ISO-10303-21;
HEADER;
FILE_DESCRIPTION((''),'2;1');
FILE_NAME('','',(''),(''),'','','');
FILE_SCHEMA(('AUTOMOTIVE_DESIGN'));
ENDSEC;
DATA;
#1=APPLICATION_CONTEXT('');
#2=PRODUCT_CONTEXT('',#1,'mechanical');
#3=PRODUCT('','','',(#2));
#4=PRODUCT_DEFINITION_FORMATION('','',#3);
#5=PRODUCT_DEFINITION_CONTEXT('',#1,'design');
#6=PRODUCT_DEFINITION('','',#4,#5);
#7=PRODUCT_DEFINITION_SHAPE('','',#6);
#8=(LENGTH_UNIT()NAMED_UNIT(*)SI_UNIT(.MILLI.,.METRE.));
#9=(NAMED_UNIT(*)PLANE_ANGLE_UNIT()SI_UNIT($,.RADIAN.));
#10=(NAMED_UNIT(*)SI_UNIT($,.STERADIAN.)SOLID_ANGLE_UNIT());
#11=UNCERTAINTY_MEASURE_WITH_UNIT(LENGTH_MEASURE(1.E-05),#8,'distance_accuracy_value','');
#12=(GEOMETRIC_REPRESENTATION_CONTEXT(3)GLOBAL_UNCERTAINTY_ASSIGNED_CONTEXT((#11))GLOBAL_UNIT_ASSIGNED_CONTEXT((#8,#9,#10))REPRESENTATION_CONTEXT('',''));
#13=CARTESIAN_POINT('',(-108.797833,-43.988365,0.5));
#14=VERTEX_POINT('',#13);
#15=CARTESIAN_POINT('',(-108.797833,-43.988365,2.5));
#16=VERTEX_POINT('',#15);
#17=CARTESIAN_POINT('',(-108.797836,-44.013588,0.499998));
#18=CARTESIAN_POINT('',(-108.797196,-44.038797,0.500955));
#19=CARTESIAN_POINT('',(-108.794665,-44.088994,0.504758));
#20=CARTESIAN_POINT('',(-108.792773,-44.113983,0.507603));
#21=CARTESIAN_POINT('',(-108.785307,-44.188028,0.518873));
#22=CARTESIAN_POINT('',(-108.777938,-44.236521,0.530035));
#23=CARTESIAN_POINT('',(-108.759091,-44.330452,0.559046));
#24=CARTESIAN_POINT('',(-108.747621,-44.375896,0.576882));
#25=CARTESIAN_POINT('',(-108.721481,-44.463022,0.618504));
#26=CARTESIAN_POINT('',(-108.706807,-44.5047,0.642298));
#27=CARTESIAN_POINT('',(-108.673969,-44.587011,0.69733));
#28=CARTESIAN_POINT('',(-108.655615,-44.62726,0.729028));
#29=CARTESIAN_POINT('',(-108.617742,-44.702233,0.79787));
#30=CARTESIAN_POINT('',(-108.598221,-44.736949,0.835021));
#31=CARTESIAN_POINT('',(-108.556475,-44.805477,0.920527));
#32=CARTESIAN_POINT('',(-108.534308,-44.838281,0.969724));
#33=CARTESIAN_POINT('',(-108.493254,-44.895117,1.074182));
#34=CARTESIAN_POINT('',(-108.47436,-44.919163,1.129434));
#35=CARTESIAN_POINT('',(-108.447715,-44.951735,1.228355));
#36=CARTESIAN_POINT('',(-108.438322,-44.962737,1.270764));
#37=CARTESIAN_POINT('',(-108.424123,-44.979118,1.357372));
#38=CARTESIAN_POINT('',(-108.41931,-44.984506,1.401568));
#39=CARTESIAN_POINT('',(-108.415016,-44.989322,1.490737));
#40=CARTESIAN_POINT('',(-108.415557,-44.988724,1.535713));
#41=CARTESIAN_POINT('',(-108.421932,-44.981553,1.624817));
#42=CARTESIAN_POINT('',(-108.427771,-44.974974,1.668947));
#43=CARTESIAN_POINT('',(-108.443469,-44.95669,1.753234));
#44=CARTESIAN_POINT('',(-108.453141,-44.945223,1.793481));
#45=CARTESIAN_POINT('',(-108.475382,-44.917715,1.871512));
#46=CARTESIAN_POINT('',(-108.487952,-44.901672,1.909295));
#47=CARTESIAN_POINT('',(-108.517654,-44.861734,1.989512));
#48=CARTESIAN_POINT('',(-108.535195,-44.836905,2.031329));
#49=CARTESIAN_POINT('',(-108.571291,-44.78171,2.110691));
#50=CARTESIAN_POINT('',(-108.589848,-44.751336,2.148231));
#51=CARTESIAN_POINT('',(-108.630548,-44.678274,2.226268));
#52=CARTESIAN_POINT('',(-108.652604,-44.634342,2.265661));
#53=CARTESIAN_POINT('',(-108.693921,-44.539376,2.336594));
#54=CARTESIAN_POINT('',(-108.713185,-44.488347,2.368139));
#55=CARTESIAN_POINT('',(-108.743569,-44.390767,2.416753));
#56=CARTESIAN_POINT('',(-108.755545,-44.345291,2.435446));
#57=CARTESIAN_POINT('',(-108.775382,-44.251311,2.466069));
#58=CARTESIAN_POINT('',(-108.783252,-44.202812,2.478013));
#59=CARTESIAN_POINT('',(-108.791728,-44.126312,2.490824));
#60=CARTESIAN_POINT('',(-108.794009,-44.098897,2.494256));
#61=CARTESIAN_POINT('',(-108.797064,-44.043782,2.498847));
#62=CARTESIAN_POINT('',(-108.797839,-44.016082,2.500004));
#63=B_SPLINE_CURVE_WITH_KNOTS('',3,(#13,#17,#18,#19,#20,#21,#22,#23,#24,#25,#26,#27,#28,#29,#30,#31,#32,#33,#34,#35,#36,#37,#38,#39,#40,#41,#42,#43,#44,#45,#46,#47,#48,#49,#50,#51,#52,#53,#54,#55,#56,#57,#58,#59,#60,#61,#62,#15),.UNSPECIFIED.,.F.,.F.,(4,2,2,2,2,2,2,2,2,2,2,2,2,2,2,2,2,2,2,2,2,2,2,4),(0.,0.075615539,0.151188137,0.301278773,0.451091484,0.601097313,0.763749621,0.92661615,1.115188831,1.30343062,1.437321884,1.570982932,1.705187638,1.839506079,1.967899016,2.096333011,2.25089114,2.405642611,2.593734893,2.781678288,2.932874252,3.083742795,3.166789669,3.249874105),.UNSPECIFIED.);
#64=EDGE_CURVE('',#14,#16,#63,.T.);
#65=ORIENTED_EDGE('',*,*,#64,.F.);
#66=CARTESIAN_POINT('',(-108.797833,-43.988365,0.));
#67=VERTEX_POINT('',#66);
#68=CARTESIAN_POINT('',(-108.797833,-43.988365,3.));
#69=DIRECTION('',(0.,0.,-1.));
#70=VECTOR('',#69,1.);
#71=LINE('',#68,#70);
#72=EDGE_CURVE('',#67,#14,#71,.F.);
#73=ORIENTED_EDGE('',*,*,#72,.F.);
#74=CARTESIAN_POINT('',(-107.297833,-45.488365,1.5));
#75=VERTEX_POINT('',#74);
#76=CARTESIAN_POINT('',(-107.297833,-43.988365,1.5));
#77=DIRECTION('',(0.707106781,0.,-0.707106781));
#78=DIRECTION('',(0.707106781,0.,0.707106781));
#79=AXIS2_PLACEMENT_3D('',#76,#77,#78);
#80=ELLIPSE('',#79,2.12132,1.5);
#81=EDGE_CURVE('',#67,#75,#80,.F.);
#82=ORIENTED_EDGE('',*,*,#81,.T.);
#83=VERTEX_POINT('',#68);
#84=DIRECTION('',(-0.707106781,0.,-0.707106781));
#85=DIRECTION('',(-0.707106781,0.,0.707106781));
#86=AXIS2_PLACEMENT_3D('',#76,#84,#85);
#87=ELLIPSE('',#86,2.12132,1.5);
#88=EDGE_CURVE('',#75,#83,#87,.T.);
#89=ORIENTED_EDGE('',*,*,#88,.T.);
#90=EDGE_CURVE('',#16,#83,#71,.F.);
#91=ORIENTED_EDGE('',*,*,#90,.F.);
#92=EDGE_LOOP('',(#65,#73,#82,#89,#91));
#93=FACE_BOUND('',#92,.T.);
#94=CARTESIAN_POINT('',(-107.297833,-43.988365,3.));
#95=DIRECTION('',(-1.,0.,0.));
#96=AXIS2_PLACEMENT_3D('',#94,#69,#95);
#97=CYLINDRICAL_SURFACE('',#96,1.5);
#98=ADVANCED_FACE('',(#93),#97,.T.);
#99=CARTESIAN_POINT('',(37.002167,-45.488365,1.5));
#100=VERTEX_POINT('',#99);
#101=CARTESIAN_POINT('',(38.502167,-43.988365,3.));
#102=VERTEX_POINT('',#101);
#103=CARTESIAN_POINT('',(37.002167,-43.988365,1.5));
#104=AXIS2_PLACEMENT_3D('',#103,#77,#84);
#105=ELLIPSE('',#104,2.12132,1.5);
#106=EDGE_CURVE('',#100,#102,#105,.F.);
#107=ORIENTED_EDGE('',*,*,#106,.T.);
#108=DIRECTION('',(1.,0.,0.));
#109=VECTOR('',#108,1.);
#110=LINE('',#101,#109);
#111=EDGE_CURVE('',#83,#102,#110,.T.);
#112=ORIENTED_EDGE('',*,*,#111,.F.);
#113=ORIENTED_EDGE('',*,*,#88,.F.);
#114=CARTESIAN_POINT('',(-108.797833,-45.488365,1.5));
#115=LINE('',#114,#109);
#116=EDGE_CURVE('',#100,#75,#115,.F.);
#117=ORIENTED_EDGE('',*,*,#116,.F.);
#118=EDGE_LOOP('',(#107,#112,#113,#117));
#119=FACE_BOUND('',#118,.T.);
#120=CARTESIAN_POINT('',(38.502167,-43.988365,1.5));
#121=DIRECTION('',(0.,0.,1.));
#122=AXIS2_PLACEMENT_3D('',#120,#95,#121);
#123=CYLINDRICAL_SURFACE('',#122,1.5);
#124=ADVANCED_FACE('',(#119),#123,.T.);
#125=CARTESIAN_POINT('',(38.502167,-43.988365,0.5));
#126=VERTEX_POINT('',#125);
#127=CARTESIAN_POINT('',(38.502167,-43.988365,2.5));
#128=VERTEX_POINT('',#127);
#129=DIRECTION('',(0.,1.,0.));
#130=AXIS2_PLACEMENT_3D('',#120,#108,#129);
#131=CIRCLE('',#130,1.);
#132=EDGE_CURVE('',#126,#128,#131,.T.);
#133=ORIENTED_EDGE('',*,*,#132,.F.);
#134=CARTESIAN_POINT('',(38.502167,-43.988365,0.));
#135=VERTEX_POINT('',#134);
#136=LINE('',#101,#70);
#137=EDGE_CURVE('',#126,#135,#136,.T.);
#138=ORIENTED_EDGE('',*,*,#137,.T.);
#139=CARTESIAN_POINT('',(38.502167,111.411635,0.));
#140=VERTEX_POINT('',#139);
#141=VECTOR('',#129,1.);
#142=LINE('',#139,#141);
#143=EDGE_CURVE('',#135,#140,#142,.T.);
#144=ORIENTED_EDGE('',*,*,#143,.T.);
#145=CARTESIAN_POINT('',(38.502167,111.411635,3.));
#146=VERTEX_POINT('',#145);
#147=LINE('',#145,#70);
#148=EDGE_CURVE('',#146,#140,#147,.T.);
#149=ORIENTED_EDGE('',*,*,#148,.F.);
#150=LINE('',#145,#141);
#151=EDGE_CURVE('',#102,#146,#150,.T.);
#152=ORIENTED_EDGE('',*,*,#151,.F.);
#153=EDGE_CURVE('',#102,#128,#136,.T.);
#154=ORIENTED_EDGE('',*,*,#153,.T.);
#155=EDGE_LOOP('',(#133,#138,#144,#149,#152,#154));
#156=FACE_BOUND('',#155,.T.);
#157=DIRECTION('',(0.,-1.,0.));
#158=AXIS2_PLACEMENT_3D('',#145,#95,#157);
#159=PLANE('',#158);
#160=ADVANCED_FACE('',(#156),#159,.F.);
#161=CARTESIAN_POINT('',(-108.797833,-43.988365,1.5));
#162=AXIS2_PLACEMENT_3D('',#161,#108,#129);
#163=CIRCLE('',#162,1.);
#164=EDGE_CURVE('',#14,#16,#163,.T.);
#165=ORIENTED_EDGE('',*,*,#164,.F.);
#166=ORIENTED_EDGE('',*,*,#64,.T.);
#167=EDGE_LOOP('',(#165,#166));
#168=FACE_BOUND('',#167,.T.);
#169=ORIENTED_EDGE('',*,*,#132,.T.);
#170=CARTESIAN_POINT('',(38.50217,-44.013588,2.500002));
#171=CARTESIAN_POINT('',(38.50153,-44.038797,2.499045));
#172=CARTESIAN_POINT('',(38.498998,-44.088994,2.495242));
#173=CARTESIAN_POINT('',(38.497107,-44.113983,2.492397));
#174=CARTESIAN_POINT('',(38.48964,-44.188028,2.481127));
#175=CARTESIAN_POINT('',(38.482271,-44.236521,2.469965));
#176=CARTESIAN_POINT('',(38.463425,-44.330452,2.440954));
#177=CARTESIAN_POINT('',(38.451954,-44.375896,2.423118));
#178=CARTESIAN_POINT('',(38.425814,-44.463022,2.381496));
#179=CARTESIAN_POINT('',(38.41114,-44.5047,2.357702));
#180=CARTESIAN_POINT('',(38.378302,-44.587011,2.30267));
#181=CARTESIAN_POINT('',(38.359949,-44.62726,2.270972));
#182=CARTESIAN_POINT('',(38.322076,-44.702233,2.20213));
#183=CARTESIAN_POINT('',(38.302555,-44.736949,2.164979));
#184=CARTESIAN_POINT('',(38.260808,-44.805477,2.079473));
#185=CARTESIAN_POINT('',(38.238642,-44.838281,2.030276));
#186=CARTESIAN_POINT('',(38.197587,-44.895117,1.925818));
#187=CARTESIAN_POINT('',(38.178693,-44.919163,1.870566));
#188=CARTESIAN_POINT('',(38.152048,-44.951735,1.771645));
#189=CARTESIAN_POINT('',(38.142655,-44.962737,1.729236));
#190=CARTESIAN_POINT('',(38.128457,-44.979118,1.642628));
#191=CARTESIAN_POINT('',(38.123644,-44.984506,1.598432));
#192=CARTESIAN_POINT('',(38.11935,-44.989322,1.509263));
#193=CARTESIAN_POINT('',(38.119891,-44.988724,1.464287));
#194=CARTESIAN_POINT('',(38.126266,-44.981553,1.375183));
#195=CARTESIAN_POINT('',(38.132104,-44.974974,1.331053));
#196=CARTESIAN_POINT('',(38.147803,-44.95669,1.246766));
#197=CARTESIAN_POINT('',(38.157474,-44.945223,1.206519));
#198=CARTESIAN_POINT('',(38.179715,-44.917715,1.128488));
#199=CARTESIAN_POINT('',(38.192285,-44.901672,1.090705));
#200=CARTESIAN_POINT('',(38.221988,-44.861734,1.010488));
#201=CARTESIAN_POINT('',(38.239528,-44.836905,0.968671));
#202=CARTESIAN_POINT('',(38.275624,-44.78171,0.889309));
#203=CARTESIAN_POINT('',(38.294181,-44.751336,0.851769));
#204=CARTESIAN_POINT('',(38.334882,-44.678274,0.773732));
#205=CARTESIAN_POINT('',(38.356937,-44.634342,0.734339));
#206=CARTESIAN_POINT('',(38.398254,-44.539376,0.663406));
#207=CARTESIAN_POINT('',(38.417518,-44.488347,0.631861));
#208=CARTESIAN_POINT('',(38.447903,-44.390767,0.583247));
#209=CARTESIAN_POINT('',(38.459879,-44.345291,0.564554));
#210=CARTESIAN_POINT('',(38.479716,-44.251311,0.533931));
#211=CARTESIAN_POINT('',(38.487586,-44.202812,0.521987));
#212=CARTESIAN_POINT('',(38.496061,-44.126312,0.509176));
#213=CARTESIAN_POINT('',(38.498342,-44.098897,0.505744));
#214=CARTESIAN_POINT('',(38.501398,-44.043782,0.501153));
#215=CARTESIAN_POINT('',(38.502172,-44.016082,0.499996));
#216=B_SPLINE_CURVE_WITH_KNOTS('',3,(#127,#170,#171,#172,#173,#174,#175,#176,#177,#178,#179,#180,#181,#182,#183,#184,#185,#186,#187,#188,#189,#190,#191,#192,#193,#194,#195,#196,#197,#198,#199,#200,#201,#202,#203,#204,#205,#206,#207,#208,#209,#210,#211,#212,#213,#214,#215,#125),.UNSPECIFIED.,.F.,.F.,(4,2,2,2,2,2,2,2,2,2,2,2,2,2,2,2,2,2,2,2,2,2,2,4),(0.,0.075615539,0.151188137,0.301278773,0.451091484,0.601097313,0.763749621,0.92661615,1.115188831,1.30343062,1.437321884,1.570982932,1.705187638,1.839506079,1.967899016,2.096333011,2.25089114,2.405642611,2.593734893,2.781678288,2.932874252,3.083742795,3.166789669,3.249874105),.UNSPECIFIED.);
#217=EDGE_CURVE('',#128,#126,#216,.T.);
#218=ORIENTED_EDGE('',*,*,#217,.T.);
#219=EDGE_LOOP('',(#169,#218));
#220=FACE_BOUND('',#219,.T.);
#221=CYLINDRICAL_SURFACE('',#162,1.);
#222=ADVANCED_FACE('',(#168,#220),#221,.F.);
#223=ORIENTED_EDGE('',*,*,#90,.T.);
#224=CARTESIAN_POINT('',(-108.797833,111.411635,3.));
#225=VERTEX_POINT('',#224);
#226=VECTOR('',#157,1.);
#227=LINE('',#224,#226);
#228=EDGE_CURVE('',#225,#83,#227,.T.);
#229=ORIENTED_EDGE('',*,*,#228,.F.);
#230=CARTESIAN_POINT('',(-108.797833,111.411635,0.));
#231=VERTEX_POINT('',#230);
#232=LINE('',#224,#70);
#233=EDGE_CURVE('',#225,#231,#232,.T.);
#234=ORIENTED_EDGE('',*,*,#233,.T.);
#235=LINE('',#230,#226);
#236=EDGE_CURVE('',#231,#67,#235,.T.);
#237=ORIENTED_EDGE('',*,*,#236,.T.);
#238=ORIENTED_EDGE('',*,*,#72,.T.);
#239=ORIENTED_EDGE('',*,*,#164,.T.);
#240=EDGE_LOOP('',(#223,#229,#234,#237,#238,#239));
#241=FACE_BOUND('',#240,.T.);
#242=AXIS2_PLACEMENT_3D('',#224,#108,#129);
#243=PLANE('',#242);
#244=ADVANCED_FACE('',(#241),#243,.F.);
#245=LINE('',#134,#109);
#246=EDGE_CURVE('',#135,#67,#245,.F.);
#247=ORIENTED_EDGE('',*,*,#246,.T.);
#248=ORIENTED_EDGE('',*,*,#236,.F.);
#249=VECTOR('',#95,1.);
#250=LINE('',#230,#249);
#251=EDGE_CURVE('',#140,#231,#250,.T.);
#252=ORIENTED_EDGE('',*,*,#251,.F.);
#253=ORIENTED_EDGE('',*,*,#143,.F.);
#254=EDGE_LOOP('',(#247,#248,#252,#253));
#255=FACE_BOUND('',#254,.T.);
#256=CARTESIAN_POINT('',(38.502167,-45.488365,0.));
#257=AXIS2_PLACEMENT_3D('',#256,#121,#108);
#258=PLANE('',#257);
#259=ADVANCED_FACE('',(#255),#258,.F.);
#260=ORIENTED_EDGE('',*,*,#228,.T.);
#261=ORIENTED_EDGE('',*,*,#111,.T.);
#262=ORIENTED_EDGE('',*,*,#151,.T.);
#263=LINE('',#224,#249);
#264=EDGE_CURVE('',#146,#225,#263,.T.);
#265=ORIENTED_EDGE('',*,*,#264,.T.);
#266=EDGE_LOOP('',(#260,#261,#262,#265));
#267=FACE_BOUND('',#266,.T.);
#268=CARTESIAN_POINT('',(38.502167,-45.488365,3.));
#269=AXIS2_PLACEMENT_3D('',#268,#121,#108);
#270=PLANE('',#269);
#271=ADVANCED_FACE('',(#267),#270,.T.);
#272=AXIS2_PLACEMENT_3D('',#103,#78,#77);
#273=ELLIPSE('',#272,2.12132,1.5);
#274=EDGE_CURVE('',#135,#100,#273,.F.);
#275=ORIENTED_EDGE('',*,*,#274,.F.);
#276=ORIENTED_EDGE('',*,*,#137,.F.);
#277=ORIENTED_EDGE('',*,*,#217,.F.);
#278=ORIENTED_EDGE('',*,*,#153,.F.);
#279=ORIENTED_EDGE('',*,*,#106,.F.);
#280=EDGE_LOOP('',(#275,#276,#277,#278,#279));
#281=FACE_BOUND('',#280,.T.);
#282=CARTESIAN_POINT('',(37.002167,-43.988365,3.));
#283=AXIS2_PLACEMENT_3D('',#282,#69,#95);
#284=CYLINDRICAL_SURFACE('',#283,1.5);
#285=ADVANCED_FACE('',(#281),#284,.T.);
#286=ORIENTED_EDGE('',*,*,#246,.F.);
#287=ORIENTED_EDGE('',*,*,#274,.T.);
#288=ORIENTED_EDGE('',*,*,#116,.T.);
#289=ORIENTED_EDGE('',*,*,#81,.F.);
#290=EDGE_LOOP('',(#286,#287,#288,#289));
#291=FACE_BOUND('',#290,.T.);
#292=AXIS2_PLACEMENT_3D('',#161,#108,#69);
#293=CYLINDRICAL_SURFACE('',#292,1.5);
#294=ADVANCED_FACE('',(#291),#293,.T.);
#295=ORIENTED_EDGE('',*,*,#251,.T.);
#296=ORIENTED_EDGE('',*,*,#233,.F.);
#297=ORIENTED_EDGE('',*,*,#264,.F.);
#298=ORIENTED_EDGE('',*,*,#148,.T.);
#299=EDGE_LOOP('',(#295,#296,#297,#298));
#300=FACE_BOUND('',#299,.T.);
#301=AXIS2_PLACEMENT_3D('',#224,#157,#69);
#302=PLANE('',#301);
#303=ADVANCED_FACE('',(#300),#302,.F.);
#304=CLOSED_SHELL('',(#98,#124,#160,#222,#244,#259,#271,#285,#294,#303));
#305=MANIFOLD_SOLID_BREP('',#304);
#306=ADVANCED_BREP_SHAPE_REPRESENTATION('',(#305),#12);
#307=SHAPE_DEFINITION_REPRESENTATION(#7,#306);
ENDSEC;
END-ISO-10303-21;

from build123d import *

# Parameters (mm, degrees)
SKETCH_1_W          = 147.3
SKETCH_1_H          = 156.9
EXTRUDE_1_DEPTH     = 3
SKETCH_2_R          = 1
CUT_EXTRUDE_1_DEPTH = 185.712864908
FILLET_1_R          = 1.5


with BuildPart() as part:
    # 草图1 → 凸台-拉伸1 (new body)
    with BuildSketch(Plane.XY):
        with Locations((-35.147833333, 32.96163522)):
            Rectangle(SKETCH_1_W, SKETCH_1_H)
    extrude(amount=EXTRUDE_1_DEPTH)

    # 草图2 → 切除-拉伸1 (cut, through all)
    with BuildSketch(Plane(origin=(38.502166667, 0, 0), x_dir=(0, 0, -1), z_dir=(1, 0, 0))):
        with Locations(Location((-1.5, -43.98836478, 0), (0, 0, 90))):
            Circle(SKETCH_2_R)
    extrude(amount=-CUT_EXTRUDE_1_DEPTH, mode=Mode.SUBTRACT)

    # 圆角1
    # the kernel refuses this fillet: 1.5 mm, written as the material it takes off along each edge
    with BuildSketch(Plane(origin=(42.252166667, -45.48836478, 3), x_dir=(0, 1, 0), z_dir=(-1, 0, 0))) as fillet_1_piece_1:
        with BuildLine():
            CenterArc((FILLET_1_R, FILLET_1_R), FILLET_1_R, 180, 90)
            Line((0, FILLET_1_R), (0, 0))
            Line((0, 0), (FILLET_1_R, 0))
        make_face()
    extrude(amount=154.8, mode=Mode.SUBTRACT)
    with BuildSketch(Plane(origin=(42.252166667, -45.48836478, 0), x_dir=(0, 1, 0), z_dir=(-1, 0, 0))) as fillet_1_piece_2:
        with BuildLine():
            CenterArc((FILLET_1_R, -FILLET_1_R), FILLET_1_R, 90, 90)
            Line((0, -FILLET_1_R), (0, 0))
            Line((0, 0), (FILLET_1_R, 0))
        make_face()
    extrude(amount=154.8, mode=Mode.SUBTRACT)
    with BuildSketch(Plane(origin=(38.502166667, -45.48836478, -3.75), x_dir=(0, 1, 0), z_dir=(0, 0, 1))) as fillet_1_piece_3:
        with BuildLine():
            CenterArc((FILLET_1_R, FILLET_1_R), FILLET_1_R, 180, 90)
            Line((0, FILLET_1_R), (0, 0))
            Line((0, 0), (FILLET_1_R, 0))
        make_face()
    extrude(amount=10.5, mode=Mode.SUBTRACT)
    with BuildSketch(Plane(origin=(-108.797833333, -45.48836478, -3.75), x_dir=(0, 1, 0), z_dir=(0, 0, 1))) as fillet_1_piece_4:
        with BuildLine():
            CenterArc((FILLET_1_R, -FILLET_1_R), FILLET_1_R, 90, 90)
            Line((0, -FILLET_1_R), (0, 0))
            Line((0, 0), (FILLET_1_R, 0))
        make_face()
    extrude(amount=10.5, mode=Mode.SUBTRACT)


solid = part.part
